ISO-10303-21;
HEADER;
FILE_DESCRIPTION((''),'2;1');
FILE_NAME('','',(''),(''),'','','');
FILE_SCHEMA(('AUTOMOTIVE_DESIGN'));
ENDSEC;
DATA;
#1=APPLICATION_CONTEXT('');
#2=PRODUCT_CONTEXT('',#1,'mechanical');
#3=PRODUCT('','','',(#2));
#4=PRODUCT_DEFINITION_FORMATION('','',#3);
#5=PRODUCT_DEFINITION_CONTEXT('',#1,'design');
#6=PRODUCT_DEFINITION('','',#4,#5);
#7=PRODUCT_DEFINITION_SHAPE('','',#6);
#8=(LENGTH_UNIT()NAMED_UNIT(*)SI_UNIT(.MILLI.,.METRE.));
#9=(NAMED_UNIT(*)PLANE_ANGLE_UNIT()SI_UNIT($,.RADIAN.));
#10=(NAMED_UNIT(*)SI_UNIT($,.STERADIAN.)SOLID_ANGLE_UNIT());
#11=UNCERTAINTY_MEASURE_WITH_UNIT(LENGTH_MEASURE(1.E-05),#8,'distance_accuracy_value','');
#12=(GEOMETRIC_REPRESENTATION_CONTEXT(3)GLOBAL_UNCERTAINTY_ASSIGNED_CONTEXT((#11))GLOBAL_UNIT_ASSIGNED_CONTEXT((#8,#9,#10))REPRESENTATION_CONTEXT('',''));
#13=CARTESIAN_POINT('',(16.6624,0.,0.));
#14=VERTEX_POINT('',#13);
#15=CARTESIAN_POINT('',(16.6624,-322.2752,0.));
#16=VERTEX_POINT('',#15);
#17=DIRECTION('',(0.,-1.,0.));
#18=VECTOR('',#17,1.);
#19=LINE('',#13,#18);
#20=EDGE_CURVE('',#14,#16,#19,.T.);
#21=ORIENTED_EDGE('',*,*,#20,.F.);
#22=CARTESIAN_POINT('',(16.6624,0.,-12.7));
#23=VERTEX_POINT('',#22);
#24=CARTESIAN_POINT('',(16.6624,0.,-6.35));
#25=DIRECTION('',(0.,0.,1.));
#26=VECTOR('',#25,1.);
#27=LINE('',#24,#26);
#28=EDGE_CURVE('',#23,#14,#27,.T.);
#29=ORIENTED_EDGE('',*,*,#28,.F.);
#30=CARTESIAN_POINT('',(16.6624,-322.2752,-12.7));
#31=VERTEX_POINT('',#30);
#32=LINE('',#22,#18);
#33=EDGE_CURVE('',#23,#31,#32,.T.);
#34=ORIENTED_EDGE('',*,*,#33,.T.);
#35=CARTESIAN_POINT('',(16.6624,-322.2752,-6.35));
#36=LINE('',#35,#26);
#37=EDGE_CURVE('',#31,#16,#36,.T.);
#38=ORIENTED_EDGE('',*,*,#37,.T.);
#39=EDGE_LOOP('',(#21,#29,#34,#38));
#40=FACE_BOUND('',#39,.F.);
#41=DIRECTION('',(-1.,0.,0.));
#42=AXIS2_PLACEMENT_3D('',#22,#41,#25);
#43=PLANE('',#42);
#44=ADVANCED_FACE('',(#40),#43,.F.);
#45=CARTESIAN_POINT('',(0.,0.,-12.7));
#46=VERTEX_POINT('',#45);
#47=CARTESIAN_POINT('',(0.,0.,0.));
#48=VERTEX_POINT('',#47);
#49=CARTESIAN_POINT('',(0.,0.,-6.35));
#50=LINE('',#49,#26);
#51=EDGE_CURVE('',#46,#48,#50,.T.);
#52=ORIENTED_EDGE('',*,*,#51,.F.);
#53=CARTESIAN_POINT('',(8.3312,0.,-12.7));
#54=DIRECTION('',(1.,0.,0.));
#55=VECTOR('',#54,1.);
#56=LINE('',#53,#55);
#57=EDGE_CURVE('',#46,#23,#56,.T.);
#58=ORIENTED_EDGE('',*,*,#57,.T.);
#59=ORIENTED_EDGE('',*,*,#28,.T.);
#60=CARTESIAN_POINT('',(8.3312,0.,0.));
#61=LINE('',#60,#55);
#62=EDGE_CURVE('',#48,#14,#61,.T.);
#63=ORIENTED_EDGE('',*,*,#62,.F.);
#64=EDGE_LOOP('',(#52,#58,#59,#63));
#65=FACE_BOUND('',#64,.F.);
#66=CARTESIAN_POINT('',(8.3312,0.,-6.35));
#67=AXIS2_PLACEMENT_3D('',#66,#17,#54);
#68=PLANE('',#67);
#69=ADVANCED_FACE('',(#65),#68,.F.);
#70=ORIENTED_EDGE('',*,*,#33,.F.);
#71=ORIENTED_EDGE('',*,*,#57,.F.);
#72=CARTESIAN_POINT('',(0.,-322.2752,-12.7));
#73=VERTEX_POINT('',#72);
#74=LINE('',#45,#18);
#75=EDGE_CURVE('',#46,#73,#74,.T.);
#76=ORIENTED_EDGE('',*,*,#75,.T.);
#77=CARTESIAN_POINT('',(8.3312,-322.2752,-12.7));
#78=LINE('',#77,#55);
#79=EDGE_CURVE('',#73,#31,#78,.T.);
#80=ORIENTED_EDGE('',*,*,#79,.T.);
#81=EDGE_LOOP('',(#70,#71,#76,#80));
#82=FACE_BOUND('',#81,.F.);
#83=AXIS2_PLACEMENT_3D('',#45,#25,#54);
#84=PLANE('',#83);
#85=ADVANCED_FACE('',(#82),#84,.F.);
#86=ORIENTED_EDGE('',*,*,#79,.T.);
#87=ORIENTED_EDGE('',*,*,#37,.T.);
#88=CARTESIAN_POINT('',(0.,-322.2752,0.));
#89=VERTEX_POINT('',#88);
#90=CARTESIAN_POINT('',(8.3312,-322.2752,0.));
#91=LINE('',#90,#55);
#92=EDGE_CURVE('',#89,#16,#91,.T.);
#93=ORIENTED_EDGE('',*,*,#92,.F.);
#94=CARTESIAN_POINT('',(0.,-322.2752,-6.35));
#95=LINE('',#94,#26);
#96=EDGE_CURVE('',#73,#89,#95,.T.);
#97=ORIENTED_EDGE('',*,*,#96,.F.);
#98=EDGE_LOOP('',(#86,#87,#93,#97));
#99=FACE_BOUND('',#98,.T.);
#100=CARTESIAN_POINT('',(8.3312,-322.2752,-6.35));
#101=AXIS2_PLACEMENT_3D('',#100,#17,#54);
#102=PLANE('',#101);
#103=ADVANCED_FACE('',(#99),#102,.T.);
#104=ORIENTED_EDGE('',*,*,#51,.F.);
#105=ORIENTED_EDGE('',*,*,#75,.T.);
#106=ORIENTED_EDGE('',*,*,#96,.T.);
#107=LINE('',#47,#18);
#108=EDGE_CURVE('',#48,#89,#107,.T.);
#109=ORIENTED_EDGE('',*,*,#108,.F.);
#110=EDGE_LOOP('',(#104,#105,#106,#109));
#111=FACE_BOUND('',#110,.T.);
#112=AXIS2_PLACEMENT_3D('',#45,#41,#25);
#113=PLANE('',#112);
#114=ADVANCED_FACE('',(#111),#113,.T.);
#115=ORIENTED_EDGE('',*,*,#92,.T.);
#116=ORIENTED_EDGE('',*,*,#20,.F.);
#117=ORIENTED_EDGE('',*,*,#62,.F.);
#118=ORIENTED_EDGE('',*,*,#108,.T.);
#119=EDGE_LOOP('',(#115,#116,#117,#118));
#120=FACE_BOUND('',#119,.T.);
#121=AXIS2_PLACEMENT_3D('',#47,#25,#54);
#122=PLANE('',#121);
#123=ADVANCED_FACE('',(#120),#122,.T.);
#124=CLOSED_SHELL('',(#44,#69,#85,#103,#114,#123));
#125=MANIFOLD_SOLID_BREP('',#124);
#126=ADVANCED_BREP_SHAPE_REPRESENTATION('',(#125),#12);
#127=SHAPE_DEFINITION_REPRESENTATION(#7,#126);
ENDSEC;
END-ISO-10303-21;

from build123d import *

# Parameters (mm, degrees)
F2_W     = 16.6624
F2_H     = 12.7
F3_DEPTH = 322.2752


# Not quite as in the source:
# - a variable given as a bare number and used for a length is read in inches; the dataset says mm whatever the document's units were


with BuildPart() as f3:
    # F2 (on Front) → F3 (new body)
    with BuildSketch(Plane.XZ):
        with Locations((8.3312, -6.35)):
            Rectangle(F2_W, F2_H)
    extrude(amount=F3_DEPTH)


solid = f3.part
